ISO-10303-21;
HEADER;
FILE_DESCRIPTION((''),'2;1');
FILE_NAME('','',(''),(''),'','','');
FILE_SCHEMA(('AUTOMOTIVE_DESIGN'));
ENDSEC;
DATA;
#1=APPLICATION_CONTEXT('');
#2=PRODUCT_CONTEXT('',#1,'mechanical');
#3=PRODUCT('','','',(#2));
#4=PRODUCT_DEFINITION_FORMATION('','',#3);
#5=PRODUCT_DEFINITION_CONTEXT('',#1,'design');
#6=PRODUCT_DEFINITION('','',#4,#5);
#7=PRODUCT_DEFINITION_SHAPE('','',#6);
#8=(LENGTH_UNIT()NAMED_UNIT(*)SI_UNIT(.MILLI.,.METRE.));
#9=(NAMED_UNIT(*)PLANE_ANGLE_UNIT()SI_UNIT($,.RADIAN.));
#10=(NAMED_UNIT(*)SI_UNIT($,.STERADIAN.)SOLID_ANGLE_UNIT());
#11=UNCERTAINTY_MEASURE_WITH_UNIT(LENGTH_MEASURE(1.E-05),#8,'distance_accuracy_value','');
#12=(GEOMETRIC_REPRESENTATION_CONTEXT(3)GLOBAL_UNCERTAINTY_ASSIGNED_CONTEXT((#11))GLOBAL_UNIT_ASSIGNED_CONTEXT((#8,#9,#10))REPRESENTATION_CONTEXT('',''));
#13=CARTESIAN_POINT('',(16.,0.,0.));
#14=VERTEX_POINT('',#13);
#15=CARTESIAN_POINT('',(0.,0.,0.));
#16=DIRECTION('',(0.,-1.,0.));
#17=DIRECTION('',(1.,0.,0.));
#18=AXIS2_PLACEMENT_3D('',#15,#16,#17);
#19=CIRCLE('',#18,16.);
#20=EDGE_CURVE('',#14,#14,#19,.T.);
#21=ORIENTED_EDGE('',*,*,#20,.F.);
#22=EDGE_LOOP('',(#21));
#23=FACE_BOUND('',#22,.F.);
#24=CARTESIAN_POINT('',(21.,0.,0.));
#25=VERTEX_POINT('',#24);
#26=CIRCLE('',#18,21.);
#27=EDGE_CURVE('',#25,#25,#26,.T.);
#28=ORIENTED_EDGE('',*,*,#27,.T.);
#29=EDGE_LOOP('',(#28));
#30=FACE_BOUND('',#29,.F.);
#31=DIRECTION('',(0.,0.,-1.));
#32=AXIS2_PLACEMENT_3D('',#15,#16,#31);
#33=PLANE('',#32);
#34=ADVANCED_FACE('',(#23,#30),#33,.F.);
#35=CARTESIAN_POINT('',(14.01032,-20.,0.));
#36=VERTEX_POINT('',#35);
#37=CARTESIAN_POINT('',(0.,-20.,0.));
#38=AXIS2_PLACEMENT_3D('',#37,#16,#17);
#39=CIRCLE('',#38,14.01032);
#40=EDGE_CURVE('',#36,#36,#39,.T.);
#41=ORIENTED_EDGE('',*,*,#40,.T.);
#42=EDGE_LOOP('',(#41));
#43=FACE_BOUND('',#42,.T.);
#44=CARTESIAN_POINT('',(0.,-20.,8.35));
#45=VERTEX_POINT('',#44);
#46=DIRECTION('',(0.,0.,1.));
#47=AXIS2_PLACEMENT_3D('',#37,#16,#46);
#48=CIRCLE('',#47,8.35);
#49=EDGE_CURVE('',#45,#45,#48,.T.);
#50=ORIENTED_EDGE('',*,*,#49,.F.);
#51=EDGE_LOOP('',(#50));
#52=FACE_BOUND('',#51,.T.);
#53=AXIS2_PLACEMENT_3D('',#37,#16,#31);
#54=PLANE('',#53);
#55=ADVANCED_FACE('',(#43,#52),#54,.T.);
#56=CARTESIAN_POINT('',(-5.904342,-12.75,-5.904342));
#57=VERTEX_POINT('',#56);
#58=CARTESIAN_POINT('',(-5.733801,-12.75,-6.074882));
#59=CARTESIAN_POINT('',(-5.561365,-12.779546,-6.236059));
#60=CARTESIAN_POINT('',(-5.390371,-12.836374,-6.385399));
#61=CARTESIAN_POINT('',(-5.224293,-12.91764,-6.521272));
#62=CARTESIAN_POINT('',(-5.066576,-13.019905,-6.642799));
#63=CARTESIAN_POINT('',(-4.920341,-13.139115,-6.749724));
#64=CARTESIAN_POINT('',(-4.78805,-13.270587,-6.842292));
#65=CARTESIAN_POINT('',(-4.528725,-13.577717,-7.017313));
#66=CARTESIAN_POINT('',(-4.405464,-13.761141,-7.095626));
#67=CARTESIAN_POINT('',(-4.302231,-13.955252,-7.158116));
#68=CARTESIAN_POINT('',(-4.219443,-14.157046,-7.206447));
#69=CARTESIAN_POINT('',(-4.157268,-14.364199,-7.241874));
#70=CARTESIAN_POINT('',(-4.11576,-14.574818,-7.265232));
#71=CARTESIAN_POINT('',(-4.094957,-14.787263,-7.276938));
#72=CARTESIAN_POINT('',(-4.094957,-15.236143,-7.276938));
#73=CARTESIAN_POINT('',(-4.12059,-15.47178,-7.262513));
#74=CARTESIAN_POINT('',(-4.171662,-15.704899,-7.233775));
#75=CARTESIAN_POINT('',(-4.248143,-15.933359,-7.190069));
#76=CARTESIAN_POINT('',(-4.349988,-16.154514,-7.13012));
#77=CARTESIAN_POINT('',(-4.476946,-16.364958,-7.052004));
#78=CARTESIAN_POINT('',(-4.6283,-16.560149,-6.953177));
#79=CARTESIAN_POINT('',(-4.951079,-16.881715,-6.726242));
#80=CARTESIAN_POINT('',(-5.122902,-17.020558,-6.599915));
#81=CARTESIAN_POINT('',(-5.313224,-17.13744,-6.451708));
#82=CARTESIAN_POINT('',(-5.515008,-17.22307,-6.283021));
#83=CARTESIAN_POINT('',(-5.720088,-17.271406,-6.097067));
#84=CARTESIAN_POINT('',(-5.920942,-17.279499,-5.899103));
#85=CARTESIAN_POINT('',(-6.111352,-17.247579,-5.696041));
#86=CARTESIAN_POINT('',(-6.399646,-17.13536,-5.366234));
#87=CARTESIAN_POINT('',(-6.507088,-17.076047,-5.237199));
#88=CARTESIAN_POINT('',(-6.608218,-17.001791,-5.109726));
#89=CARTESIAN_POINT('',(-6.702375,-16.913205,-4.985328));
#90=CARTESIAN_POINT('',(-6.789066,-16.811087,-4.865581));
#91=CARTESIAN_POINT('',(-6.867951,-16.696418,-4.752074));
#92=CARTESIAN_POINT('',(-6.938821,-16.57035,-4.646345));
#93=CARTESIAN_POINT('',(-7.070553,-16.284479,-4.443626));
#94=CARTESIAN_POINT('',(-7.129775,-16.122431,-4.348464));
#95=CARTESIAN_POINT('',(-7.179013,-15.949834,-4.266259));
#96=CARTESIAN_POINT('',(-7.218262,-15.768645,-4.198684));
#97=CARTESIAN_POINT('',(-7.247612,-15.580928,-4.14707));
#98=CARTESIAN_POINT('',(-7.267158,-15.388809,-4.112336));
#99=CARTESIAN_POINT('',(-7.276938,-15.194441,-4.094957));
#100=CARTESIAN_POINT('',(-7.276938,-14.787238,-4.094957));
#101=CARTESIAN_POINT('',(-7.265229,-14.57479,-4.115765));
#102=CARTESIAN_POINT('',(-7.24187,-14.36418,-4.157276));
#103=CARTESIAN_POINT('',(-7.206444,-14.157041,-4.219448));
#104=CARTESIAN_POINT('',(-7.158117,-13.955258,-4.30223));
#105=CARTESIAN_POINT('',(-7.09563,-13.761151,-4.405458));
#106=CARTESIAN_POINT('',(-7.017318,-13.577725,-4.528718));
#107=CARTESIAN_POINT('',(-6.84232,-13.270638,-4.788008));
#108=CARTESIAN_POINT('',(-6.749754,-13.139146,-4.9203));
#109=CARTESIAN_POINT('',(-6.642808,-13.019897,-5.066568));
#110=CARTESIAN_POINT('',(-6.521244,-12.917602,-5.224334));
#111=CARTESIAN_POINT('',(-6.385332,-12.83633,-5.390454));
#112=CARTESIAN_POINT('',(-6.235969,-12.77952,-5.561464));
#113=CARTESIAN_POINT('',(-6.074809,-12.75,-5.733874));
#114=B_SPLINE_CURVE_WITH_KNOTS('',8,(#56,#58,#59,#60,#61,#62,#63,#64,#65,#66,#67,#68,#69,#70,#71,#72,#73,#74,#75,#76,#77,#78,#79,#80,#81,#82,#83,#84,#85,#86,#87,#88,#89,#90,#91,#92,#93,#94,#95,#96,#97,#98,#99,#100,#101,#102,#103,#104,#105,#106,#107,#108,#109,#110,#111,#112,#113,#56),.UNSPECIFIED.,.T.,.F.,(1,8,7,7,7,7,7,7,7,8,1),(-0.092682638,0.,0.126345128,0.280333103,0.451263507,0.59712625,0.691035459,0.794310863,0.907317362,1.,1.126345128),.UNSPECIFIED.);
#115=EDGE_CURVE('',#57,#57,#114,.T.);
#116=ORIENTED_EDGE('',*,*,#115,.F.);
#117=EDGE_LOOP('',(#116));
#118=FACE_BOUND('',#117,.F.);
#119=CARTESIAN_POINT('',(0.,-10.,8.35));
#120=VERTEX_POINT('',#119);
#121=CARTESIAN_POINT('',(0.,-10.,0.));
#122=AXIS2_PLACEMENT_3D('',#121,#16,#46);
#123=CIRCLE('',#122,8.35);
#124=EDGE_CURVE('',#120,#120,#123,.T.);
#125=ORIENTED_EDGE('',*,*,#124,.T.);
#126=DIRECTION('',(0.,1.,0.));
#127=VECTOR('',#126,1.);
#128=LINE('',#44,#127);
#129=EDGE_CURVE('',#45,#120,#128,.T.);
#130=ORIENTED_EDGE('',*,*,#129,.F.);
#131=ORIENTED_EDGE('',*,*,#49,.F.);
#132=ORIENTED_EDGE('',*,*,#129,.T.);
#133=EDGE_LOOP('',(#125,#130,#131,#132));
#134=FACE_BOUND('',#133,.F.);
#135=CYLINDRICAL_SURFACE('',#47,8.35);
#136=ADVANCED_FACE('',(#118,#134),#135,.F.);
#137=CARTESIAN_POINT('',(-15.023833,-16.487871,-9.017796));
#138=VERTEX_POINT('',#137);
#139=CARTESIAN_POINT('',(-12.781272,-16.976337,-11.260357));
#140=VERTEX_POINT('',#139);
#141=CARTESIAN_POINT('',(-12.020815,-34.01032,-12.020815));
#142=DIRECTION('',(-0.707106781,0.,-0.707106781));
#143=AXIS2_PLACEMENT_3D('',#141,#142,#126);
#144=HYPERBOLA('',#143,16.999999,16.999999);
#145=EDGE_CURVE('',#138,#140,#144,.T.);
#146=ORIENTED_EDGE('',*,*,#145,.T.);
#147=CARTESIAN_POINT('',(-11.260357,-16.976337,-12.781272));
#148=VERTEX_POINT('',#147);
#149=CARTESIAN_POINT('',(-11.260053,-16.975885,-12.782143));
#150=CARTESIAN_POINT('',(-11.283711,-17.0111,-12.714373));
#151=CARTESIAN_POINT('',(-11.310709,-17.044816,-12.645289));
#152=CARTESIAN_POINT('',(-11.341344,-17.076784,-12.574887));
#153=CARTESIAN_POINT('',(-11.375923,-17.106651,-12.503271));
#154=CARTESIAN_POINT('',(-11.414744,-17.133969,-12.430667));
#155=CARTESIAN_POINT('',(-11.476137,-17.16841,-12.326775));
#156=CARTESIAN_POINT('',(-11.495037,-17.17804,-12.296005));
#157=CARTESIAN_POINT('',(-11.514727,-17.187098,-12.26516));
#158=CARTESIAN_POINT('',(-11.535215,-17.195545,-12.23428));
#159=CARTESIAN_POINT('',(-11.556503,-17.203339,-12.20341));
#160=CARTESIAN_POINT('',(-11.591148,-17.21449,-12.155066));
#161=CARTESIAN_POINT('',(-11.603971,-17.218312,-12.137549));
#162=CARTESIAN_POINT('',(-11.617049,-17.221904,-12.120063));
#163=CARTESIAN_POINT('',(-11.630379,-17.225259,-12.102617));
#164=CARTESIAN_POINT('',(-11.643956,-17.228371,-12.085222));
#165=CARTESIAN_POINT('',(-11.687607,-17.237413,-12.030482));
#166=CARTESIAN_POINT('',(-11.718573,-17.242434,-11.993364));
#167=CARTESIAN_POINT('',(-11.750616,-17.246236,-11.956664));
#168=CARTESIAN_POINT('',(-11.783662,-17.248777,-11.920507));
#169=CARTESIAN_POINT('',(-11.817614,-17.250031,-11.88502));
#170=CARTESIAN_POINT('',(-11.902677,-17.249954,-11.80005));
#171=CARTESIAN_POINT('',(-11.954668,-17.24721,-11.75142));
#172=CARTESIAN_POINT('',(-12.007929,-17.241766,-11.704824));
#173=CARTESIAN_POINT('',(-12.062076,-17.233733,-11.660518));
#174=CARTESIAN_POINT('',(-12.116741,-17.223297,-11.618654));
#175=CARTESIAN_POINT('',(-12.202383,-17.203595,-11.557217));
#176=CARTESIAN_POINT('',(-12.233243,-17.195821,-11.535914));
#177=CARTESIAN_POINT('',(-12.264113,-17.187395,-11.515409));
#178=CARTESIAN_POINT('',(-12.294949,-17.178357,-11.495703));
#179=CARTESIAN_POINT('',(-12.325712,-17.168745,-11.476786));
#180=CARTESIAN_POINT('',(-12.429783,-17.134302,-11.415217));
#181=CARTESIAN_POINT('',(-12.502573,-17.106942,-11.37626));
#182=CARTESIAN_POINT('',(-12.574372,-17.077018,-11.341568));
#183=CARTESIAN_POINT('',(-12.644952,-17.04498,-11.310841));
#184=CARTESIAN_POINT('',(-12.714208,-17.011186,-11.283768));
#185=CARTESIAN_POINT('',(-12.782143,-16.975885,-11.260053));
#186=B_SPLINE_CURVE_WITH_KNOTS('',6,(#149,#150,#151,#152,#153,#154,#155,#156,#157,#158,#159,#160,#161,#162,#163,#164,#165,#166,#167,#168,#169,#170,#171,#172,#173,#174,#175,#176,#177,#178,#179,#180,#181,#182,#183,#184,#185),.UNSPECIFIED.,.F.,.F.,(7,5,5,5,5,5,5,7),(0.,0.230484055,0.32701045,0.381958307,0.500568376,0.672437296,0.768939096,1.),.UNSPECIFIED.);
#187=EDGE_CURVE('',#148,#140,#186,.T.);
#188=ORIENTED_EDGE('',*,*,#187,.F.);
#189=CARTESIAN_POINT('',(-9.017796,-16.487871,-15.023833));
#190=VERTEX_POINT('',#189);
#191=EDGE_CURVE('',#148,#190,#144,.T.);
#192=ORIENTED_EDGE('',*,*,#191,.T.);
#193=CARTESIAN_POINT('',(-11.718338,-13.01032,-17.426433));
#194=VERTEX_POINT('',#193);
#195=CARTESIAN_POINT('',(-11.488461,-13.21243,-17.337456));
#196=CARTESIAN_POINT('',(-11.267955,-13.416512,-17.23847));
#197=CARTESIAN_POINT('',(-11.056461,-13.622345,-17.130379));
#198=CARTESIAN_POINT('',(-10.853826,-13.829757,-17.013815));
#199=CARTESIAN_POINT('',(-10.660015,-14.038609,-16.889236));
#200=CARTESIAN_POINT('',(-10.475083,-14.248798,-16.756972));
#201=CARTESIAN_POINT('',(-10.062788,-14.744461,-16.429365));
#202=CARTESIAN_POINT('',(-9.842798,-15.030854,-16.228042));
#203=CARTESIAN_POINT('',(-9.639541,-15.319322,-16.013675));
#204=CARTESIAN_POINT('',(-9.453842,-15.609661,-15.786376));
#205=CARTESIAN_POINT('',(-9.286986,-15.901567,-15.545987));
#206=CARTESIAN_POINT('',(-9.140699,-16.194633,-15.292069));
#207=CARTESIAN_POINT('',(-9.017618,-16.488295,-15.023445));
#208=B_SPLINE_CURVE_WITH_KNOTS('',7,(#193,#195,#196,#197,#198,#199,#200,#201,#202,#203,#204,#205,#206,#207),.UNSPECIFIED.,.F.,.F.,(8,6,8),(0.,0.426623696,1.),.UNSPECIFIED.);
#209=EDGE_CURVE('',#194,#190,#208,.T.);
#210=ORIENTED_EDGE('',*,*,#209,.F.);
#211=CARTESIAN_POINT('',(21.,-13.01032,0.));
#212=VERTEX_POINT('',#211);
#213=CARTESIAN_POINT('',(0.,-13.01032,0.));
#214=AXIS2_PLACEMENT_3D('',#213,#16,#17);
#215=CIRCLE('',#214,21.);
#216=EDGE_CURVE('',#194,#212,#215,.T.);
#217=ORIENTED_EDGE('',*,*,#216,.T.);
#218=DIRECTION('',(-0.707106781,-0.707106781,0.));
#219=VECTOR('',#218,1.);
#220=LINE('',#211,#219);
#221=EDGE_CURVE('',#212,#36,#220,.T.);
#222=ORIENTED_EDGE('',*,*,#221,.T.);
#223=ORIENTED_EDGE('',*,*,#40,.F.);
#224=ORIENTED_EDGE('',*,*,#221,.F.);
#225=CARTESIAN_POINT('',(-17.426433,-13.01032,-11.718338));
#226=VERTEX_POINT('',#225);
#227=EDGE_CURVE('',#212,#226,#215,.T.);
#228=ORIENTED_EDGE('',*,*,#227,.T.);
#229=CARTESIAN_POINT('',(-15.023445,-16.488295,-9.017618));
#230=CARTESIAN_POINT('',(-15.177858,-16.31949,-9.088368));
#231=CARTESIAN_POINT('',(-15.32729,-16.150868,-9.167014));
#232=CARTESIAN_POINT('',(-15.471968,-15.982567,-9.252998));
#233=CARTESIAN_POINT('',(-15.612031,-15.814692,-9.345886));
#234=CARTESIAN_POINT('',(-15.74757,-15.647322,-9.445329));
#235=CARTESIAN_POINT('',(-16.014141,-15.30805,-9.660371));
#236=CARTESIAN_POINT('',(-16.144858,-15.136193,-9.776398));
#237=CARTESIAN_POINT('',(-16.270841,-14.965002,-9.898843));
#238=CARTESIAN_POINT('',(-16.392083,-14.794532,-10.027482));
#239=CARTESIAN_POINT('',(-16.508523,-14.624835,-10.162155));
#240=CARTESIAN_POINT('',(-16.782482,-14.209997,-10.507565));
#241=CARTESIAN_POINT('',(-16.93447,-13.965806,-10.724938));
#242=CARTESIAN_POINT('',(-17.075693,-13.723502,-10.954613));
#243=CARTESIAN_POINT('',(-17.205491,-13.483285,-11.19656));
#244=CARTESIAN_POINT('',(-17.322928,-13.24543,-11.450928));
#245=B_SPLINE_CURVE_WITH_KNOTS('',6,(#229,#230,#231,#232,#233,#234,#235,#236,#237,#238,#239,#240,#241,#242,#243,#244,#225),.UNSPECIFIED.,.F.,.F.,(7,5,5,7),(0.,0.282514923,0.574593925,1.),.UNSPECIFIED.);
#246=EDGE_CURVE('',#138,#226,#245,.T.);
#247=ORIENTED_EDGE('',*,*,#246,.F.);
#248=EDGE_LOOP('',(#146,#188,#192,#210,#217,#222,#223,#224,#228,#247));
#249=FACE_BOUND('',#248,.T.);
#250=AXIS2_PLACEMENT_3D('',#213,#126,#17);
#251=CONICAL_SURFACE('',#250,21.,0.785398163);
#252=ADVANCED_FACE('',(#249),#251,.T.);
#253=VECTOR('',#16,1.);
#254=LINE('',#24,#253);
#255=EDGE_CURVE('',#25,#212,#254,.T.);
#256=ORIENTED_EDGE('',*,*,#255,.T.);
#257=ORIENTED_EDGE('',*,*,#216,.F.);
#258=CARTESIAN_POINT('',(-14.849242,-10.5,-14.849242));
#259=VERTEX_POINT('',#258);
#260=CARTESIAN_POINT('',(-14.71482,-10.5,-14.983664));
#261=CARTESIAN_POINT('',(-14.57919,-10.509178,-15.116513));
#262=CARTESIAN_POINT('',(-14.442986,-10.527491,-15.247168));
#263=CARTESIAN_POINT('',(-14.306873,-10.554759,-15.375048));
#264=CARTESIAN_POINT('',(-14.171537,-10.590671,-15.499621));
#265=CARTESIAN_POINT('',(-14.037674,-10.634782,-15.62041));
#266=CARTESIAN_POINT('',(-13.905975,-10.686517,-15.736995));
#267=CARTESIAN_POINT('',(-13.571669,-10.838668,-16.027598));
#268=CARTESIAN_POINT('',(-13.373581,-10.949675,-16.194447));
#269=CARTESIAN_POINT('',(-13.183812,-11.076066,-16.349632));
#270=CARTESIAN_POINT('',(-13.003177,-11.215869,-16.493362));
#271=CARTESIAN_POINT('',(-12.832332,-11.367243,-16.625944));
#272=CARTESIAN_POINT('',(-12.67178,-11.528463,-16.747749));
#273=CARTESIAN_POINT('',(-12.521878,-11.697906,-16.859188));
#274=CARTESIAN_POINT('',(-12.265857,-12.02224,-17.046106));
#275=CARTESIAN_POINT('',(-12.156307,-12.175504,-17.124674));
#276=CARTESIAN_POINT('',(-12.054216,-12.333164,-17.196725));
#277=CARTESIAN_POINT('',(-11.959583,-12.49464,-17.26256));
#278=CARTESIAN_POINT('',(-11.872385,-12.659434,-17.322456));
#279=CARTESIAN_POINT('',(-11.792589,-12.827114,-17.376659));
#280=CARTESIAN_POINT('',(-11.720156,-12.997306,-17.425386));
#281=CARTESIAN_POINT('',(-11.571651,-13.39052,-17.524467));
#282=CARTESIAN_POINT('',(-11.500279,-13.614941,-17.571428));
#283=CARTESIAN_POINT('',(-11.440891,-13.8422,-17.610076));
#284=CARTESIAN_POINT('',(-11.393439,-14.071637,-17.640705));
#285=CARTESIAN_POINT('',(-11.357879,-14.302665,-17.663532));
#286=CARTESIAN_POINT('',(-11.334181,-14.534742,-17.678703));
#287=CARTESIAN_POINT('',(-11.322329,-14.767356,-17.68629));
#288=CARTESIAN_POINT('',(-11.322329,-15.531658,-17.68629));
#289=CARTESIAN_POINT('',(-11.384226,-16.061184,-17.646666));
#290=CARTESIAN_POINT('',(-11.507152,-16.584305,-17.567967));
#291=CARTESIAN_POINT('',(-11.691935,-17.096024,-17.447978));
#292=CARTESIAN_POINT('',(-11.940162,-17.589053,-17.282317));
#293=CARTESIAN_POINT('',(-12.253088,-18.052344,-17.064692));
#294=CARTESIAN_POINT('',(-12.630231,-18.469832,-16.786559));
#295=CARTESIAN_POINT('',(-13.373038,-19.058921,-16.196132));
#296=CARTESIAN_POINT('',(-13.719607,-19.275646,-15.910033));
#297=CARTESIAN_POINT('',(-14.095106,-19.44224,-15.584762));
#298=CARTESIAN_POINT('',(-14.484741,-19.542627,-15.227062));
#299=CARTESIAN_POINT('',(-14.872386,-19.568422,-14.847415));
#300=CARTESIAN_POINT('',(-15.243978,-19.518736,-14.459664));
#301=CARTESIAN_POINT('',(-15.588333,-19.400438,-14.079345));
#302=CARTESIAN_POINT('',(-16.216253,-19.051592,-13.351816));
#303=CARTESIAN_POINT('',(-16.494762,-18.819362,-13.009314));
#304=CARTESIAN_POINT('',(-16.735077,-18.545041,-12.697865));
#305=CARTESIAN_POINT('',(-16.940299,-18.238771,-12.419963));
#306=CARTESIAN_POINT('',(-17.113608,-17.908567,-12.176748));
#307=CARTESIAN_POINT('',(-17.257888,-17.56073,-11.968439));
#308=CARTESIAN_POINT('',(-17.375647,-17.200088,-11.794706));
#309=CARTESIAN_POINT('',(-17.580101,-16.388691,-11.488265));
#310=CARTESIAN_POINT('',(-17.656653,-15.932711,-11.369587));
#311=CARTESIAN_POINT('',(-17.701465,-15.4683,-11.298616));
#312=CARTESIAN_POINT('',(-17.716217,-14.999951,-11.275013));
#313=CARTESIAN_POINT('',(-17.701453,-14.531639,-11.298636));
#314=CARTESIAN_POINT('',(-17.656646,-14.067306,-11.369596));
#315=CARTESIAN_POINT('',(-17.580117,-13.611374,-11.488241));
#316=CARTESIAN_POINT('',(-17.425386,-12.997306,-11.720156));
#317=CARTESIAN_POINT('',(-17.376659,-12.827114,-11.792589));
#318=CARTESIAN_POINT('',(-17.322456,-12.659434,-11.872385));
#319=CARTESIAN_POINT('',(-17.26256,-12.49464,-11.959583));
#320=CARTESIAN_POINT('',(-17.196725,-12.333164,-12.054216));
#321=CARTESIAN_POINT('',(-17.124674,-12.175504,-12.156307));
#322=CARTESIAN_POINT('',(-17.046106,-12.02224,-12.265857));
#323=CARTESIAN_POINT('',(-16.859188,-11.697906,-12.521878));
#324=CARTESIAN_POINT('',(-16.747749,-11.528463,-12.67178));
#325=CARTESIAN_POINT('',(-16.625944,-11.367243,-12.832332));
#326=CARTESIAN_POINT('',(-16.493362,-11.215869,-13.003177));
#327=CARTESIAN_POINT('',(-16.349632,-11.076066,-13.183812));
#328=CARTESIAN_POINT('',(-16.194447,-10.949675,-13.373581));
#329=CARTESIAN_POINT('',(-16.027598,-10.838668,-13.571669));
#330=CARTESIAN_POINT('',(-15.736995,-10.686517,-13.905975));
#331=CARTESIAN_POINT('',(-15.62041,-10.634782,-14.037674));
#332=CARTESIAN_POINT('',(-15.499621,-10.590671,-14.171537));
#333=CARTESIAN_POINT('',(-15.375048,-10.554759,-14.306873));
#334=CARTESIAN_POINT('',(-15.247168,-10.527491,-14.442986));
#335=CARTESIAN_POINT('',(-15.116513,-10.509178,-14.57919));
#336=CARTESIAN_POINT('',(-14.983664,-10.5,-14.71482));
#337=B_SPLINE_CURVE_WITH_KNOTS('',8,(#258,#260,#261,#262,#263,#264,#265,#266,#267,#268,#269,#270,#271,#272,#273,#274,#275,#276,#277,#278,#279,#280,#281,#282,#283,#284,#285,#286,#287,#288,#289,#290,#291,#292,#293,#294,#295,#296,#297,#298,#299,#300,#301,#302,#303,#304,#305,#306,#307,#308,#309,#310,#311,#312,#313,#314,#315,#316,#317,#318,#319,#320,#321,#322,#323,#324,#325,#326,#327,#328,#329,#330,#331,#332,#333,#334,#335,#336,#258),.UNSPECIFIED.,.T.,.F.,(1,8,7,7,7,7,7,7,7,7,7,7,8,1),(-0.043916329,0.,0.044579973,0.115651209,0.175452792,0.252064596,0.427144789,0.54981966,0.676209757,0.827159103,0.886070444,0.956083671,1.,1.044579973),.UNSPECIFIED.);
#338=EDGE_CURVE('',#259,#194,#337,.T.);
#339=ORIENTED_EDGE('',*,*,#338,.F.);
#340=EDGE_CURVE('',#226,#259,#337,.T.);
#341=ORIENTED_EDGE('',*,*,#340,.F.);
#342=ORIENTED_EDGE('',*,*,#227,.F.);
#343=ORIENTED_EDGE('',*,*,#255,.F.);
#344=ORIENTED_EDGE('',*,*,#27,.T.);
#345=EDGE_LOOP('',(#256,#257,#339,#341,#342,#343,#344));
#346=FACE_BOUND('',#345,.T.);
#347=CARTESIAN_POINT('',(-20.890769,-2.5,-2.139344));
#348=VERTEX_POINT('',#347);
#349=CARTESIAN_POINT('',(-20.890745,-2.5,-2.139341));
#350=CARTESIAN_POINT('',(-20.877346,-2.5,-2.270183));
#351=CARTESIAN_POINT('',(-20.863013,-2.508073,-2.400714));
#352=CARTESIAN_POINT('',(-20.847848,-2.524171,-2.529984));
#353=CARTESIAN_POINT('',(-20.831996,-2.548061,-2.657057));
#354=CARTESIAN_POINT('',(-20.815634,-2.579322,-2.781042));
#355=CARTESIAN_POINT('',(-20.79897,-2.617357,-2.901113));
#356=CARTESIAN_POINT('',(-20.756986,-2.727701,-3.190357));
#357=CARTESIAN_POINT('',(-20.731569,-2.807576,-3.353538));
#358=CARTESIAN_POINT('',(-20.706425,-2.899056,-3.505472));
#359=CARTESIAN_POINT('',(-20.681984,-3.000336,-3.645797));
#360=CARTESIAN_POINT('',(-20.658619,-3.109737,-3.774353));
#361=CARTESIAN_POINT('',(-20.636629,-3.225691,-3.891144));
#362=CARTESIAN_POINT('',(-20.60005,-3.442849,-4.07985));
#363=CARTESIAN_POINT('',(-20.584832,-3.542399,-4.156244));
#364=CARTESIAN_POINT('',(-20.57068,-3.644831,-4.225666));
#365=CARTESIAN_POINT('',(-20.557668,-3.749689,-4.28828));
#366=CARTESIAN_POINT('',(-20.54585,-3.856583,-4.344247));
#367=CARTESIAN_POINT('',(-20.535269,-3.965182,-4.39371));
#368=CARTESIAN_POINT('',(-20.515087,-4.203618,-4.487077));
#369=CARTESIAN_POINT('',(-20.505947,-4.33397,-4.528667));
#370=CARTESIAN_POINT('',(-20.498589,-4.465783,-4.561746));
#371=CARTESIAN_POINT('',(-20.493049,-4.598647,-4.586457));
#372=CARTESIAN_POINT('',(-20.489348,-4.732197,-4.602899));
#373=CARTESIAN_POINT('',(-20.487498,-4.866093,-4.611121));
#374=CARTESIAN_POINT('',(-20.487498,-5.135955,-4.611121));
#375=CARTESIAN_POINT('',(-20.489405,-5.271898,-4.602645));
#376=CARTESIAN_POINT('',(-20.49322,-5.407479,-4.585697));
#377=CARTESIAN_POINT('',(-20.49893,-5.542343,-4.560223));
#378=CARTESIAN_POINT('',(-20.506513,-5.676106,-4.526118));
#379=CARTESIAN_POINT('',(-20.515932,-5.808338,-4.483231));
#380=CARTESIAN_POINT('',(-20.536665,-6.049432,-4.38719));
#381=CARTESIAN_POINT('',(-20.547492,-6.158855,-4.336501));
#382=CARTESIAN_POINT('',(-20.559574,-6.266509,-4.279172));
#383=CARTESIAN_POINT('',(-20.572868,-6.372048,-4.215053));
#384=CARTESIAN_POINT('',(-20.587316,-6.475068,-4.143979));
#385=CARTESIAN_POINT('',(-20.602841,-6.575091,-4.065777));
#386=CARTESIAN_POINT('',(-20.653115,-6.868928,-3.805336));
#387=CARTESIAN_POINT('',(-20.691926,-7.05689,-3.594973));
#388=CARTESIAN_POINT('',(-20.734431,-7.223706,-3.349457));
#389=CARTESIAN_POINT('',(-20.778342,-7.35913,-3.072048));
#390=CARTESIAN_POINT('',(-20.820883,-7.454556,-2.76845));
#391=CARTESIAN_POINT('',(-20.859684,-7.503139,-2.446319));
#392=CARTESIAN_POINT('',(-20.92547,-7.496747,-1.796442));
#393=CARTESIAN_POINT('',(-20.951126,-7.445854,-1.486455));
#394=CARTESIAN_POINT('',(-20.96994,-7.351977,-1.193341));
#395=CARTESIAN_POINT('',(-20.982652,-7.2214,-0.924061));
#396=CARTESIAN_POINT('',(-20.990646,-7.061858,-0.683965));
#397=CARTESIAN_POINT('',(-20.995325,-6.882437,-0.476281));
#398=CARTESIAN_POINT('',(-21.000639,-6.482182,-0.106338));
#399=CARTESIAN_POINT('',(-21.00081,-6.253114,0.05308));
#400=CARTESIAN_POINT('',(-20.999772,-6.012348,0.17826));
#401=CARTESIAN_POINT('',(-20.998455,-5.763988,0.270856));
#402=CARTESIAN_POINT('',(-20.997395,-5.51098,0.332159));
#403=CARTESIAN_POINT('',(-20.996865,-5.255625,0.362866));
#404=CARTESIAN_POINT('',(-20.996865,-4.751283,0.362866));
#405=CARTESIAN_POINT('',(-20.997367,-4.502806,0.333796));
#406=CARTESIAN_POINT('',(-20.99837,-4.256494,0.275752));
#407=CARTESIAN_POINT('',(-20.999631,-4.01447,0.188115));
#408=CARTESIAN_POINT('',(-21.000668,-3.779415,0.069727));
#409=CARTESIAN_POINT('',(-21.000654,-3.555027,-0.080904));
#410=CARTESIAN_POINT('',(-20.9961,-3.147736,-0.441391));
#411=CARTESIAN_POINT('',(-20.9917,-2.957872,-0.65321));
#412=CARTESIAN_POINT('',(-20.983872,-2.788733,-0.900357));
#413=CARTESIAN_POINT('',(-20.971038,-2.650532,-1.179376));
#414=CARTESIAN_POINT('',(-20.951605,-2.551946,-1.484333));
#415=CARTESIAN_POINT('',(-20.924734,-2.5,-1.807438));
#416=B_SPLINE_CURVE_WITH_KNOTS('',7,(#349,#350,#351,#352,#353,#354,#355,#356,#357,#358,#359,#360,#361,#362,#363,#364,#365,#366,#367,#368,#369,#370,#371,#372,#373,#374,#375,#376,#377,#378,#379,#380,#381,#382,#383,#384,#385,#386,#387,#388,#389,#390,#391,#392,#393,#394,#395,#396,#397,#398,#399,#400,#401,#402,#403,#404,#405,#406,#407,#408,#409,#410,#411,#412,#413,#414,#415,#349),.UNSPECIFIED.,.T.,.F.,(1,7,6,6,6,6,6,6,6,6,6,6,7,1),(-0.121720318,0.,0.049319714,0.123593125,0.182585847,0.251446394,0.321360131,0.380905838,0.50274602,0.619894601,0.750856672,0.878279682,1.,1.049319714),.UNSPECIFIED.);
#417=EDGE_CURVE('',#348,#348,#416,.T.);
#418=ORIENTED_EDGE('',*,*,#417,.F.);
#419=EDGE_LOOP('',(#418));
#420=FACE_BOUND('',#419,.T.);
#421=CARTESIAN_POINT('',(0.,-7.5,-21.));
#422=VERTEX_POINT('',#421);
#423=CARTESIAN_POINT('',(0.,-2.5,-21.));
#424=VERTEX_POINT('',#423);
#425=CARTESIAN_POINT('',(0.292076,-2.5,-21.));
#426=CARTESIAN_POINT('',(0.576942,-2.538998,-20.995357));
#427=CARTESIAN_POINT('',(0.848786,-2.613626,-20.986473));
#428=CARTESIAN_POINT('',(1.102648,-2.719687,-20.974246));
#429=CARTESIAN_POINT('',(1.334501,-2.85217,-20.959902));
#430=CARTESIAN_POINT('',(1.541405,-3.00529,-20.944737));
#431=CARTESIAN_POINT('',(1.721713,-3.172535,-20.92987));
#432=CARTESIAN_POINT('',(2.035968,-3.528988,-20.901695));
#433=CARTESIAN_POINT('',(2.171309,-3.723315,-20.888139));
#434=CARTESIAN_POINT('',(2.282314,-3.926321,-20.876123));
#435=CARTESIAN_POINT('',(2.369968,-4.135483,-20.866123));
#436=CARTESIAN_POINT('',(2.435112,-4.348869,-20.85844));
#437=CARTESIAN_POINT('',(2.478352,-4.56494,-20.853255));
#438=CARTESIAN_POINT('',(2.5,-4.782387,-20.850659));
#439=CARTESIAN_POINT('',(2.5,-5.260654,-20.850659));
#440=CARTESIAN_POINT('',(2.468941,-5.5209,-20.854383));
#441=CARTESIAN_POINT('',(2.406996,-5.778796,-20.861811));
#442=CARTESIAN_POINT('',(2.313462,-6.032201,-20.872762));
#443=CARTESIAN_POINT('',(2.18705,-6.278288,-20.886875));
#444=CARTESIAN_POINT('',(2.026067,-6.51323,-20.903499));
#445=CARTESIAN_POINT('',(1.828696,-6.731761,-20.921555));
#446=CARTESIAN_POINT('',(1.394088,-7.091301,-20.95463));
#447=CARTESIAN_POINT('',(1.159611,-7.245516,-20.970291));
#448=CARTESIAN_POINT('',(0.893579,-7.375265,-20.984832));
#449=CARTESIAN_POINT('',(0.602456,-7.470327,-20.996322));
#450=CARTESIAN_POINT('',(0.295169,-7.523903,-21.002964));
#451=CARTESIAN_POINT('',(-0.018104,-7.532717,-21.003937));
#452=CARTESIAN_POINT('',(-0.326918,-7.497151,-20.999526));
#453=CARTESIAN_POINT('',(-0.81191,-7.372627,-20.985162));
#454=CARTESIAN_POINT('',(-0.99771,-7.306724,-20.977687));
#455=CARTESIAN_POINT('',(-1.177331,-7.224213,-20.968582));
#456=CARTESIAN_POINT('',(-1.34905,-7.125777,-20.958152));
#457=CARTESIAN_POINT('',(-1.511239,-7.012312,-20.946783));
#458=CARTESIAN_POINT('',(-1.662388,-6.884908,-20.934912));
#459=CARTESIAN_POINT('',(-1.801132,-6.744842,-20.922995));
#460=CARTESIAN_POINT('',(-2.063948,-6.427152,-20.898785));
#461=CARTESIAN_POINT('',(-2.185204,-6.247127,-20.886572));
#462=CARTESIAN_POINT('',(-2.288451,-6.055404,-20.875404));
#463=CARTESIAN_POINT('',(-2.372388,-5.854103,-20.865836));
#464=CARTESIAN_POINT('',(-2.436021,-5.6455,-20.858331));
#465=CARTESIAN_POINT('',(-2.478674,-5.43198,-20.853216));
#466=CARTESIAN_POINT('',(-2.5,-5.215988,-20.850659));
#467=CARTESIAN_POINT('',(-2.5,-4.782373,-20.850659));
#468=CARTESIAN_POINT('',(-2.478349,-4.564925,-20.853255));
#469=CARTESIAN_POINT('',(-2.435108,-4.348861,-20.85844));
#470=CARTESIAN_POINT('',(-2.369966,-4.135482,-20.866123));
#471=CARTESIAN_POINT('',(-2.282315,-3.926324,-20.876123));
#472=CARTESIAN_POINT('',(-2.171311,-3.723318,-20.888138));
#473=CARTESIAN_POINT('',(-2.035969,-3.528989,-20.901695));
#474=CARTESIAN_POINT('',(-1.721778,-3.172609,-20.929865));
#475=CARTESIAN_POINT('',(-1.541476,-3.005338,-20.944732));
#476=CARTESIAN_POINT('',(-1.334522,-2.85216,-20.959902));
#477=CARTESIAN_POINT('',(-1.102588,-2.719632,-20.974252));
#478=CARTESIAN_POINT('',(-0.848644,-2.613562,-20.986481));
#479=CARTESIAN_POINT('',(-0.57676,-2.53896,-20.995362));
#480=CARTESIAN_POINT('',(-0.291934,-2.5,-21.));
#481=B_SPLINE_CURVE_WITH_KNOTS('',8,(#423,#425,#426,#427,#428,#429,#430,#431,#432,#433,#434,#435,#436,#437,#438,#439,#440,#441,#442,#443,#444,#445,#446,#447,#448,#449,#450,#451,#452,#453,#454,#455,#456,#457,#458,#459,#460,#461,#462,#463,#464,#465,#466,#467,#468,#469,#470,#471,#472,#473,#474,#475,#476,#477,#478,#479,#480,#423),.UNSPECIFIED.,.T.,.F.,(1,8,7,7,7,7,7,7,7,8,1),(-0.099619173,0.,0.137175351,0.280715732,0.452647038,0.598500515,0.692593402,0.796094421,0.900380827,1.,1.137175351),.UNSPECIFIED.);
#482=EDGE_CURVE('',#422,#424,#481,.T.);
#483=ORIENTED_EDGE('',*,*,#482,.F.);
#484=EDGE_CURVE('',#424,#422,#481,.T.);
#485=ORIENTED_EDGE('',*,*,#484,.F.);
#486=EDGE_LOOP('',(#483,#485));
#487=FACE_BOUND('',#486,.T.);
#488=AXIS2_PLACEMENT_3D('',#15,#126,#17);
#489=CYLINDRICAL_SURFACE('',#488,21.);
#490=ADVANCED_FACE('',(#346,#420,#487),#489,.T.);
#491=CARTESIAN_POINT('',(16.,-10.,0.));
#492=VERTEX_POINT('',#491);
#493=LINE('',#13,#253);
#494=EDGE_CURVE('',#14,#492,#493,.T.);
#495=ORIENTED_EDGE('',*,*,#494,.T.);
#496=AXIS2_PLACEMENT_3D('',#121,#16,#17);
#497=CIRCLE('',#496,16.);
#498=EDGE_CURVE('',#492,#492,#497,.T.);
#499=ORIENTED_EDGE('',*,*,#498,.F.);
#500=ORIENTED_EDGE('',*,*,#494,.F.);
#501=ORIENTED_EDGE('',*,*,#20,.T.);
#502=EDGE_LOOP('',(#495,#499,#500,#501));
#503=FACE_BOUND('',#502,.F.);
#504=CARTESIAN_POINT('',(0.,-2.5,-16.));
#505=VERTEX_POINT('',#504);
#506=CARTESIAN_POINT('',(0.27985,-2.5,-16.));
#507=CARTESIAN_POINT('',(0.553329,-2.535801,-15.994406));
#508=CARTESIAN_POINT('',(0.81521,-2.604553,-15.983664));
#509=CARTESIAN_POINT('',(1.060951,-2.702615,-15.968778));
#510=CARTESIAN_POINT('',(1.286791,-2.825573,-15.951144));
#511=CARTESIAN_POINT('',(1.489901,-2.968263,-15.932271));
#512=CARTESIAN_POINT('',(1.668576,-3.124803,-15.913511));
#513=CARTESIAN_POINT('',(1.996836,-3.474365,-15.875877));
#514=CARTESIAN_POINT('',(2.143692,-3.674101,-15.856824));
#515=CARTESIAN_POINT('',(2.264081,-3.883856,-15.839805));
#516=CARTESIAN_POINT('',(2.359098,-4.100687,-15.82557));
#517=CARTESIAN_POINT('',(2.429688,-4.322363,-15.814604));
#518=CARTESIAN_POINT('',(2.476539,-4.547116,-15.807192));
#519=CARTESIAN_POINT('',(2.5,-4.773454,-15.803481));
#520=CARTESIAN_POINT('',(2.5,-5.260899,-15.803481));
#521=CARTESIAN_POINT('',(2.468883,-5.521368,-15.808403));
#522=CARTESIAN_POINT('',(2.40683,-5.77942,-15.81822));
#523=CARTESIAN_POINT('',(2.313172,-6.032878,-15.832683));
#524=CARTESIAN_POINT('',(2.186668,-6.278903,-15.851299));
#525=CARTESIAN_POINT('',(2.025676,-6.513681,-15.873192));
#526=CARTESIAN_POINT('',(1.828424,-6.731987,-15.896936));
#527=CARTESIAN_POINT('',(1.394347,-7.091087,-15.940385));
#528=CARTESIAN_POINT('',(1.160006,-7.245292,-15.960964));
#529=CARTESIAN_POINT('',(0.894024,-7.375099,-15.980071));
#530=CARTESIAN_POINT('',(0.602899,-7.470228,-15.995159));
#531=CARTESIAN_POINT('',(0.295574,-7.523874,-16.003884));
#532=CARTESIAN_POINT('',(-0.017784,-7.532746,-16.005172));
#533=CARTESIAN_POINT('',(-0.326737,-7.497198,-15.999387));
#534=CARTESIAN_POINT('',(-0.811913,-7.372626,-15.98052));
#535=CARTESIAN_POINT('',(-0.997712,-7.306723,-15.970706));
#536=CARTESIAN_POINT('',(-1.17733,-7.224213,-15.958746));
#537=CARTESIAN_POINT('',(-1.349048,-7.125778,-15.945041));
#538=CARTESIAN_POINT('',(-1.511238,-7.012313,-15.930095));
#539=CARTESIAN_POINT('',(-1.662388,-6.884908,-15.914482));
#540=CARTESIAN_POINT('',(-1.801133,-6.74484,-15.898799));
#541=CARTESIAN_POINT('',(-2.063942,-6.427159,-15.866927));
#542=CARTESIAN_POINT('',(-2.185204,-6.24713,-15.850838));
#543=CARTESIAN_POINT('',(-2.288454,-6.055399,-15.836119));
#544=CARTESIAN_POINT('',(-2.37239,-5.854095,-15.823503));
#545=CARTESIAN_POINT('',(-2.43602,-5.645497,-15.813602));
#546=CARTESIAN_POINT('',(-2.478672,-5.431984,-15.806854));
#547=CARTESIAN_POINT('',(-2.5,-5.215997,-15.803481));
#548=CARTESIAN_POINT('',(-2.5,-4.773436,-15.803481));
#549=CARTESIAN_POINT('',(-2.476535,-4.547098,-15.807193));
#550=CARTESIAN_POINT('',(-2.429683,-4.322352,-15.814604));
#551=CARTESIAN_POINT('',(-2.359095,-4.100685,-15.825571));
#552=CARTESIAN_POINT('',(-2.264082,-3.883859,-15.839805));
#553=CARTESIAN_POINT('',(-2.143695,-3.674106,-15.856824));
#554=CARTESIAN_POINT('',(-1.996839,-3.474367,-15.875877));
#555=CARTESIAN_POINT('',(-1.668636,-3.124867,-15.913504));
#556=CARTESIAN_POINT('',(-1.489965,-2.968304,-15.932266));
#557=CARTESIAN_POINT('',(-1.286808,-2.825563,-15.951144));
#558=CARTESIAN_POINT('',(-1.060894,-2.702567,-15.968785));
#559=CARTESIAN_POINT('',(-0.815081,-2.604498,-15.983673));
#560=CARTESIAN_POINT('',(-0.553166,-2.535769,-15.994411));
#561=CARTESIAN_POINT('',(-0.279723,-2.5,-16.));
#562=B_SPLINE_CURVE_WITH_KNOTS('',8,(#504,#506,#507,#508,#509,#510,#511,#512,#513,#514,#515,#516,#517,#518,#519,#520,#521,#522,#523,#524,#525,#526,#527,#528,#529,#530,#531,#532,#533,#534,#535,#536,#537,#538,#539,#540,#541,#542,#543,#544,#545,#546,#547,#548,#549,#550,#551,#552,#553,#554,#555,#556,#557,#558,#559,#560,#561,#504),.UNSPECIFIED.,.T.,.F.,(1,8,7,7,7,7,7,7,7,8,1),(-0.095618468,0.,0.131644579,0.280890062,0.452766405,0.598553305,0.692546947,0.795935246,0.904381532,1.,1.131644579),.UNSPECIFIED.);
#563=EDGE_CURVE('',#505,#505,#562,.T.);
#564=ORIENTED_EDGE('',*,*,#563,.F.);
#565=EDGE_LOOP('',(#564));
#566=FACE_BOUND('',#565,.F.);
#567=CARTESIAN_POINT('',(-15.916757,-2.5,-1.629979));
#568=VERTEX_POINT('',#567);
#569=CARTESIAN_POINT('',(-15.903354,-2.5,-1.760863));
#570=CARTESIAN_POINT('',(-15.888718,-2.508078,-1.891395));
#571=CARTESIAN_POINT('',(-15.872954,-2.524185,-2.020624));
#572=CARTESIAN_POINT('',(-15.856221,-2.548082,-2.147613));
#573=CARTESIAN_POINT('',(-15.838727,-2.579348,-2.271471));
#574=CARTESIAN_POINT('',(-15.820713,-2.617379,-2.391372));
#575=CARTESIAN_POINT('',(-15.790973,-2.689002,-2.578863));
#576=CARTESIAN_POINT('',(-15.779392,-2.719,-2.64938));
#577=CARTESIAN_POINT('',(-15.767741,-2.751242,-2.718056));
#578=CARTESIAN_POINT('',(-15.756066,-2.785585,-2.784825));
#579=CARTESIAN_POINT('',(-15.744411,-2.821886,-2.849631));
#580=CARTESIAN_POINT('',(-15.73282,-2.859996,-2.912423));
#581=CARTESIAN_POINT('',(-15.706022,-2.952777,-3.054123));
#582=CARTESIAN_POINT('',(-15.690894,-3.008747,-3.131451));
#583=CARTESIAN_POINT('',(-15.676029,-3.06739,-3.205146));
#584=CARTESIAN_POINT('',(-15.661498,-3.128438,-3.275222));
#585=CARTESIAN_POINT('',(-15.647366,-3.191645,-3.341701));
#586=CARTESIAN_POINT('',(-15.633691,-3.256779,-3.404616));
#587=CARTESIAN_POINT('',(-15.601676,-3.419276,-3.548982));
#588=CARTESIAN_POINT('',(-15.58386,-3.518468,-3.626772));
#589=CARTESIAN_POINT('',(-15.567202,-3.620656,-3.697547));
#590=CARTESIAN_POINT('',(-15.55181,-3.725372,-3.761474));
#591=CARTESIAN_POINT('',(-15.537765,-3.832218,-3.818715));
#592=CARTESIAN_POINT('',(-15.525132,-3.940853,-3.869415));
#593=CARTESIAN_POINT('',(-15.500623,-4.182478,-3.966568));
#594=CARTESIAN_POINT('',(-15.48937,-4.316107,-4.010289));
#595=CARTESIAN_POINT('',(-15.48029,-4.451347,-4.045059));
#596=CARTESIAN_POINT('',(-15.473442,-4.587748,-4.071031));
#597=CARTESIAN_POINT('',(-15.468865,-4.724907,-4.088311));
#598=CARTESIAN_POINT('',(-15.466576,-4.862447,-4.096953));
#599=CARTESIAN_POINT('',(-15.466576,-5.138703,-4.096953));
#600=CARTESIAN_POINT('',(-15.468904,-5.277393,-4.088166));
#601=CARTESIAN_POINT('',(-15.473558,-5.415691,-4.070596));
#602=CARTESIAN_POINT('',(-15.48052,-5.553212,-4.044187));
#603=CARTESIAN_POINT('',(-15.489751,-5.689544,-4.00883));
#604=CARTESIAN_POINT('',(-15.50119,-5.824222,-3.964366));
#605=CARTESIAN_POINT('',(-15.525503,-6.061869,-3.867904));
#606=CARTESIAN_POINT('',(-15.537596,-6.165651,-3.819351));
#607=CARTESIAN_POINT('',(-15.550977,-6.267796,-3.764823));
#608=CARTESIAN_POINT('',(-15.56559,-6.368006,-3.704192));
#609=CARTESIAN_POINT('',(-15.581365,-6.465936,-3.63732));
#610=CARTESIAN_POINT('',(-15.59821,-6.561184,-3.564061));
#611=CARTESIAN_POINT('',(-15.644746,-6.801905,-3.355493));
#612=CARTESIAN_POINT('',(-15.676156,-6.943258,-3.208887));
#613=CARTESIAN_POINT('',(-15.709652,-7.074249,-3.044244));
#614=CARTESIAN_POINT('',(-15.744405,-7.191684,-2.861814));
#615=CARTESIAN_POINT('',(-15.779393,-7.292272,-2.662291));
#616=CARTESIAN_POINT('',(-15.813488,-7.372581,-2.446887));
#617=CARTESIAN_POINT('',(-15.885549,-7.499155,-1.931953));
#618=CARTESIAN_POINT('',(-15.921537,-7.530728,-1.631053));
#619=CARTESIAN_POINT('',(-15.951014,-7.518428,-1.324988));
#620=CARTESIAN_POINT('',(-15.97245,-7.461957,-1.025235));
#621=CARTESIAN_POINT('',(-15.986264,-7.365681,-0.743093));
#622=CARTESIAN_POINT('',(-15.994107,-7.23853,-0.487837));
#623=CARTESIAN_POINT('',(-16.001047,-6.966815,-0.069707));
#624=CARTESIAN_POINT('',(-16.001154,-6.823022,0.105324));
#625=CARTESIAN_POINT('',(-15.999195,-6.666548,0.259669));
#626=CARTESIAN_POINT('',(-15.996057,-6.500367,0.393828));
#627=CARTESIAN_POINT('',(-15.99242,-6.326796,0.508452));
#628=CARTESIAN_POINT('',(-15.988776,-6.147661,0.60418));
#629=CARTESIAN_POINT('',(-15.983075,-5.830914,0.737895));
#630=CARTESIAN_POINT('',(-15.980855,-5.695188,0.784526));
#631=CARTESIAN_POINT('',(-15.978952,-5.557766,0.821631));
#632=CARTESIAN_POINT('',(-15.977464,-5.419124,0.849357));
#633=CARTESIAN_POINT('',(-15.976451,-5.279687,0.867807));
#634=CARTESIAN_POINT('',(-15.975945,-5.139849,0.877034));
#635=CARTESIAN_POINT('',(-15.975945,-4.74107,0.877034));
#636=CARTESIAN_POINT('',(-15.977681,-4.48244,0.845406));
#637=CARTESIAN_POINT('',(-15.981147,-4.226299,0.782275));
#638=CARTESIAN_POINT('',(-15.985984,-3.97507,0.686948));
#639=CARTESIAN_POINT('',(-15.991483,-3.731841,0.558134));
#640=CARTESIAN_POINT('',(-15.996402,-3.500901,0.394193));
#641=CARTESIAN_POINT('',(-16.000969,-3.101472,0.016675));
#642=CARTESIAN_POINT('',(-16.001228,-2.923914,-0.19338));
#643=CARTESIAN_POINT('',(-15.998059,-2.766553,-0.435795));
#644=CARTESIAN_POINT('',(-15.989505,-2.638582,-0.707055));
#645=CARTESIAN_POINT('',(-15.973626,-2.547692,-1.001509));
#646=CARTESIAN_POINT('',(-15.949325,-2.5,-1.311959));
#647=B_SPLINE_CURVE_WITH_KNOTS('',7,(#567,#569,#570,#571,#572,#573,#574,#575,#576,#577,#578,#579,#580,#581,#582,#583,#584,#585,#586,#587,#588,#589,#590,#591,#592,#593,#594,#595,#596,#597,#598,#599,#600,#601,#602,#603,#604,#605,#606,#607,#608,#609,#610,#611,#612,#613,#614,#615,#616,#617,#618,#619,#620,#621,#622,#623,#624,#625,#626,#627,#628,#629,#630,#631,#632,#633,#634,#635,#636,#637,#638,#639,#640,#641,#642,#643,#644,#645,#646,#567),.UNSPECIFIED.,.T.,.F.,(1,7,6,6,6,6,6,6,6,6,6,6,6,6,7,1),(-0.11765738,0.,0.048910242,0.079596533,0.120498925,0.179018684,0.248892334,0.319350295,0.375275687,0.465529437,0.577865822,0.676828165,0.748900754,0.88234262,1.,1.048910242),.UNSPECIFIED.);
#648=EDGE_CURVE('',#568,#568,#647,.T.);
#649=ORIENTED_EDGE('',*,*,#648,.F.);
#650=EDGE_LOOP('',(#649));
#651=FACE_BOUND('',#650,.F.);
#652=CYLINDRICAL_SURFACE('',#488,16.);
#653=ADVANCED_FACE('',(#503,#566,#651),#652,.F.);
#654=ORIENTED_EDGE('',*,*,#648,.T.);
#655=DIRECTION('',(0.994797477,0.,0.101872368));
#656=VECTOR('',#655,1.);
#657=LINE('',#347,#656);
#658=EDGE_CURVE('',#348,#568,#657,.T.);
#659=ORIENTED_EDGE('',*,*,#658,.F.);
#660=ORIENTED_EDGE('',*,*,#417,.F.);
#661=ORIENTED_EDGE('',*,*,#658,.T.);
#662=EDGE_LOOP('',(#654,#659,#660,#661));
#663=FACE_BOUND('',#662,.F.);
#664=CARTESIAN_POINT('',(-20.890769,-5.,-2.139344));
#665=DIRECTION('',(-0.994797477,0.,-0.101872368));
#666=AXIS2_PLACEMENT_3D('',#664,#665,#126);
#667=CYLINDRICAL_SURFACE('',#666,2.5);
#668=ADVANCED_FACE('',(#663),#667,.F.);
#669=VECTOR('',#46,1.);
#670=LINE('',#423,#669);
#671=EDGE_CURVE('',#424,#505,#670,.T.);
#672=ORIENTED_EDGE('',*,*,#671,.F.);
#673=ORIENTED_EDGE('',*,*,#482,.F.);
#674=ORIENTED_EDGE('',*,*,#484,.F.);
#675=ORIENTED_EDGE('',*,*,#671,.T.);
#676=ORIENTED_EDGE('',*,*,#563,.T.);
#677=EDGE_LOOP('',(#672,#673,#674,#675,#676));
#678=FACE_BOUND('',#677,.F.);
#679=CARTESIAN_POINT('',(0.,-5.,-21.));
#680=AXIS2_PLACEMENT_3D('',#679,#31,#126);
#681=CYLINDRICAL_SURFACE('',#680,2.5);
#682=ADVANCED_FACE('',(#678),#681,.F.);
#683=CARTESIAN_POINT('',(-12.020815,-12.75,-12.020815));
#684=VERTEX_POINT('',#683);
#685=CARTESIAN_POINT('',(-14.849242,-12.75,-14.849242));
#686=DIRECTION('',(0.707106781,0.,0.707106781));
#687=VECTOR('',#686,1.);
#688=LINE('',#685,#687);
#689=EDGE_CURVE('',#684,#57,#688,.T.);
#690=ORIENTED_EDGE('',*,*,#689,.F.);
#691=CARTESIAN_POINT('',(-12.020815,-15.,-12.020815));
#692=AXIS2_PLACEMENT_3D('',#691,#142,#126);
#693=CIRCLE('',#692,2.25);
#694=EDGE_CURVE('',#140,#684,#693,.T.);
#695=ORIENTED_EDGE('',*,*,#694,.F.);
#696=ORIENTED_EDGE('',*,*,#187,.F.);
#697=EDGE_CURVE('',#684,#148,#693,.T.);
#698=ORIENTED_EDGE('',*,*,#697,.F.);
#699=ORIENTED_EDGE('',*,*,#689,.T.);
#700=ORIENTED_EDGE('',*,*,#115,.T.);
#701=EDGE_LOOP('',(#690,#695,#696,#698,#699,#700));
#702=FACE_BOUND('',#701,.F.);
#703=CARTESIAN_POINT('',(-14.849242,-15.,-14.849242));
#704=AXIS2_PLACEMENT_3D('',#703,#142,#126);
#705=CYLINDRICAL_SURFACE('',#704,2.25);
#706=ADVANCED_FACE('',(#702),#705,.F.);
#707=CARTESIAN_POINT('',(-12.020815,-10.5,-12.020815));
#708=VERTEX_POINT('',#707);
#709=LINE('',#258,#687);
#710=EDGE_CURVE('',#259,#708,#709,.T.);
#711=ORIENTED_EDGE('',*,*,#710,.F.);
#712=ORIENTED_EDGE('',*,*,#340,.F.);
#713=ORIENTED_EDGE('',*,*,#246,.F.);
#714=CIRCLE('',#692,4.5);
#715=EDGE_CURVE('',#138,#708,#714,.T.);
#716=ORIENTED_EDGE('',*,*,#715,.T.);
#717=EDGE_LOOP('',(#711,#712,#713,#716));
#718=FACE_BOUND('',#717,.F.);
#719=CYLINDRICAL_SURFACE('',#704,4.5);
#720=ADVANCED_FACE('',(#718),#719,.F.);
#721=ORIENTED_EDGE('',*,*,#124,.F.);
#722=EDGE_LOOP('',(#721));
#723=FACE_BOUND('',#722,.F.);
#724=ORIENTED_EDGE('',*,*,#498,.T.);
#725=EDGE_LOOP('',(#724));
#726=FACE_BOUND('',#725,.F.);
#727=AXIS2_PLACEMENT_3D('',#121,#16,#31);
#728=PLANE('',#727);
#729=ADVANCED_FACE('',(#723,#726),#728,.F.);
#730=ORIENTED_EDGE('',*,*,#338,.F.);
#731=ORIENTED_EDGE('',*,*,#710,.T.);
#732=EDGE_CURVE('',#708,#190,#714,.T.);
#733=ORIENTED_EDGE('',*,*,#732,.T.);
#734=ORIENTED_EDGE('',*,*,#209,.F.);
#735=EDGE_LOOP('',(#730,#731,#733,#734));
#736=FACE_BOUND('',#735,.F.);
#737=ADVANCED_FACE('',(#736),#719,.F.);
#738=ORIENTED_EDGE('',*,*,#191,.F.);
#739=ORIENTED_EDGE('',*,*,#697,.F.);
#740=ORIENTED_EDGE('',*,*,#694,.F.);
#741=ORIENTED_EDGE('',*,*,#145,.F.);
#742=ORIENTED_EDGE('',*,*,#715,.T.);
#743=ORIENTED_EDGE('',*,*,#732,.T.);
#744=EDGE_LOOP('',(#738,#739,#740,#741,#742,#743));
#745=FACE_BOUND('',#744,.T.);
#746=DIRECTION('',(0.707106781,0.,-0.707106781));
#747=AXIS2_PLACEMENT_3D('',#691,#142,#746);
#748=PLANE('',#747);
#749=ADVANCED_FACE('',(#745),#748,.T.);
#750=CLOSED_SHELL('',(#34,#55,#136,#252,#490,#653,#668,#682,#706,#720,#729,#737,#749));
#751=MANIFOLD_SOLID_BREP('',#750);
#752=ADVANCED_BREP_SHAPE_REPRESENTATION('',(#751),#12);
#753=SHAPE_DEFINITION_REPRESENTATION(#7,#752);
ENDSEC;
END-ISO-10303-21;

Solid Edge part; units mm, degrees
sketch "Sketch1" plane through (0, 0, 0) normal (0, -1, 0) x (1, 0, 0)
  circle A0 centre (0, 0) radius 21
extrude "Protrusion1" add sketch "Sketch1" along normal blind 20
sketch "Sketch2" plane through (0, 0, 0) normal (0, -1, 0) x (1, 0, 0)
  circle A0 centre (0, 0) radius 8
extrude "ExtrudedCutout_1" cut sketch "Sketch2" along normal blind 161.3
sketch "Sketch3" plane through (0, 0, 0) normal (0, -1, 0) x (1, 0, 0)
  circle A0 centre (0, 0) radius 16
  circle A1 centre (0, 0) radius 8
  dimension "D1" = 16
  dimension "D2" = 32
  dimension "D3" = 42
extrude "ExtrudedCutout_2" cut sketch "Sketch3" along normal blind 10
sketch "Sketch4" plane through (0, -10, -21) normal (0, 0, -1) x (0, 1, 0)
  circle A0 centre (5, 0) radius 2.5
extrude "Cutout1" cut sketch "Sketch4" against normal up to vertex (21 mm away)
pattern_circular "Pattern1" count 2 over 84.153 about axis through (-0.000024, 0, 0) along (0, 1, 0) of "Cutout1"
sketch "Sketch5" plane through (0, -20, 0) normal (0, -1, 0) x (0, 0, 1)
  circle A0 centre (0, 0) radius 8.35
extrude "Cutout2" cut sketch "Sketch5" against normal blind 63.3
sketch "Sketch6" plane through (-14.849242, -10, -14.849242) normal (-0.7071068, 0, -0.7071068) x (0, 1, 0)
  circle A0 centre (-5, 0) radius 2.25
extrude "ExtrudedCutout_9" cut sketch "Sketch6" against normal blind 20.6
sketch "Sketch7" plane through (-14.849242, -10, -14.849242) normal (-0.7071068, 0, -0.7071068) x (0, 1, 0)
  circle A0 centre (-5, 0) radius 2.25
  circle A1 centre (-5, 0) radius 4.5
  dimension "D1" = 5
  dimension "D2" = 4.5
  dimension "D3" = 9
extrude "ExtrudedCutout_10" cut sketch "Sketch7" against normal blind 4
chamfer "Chamfer_4" distance 6.98968 angle 45 1 edges at (-21, -20, 0)
